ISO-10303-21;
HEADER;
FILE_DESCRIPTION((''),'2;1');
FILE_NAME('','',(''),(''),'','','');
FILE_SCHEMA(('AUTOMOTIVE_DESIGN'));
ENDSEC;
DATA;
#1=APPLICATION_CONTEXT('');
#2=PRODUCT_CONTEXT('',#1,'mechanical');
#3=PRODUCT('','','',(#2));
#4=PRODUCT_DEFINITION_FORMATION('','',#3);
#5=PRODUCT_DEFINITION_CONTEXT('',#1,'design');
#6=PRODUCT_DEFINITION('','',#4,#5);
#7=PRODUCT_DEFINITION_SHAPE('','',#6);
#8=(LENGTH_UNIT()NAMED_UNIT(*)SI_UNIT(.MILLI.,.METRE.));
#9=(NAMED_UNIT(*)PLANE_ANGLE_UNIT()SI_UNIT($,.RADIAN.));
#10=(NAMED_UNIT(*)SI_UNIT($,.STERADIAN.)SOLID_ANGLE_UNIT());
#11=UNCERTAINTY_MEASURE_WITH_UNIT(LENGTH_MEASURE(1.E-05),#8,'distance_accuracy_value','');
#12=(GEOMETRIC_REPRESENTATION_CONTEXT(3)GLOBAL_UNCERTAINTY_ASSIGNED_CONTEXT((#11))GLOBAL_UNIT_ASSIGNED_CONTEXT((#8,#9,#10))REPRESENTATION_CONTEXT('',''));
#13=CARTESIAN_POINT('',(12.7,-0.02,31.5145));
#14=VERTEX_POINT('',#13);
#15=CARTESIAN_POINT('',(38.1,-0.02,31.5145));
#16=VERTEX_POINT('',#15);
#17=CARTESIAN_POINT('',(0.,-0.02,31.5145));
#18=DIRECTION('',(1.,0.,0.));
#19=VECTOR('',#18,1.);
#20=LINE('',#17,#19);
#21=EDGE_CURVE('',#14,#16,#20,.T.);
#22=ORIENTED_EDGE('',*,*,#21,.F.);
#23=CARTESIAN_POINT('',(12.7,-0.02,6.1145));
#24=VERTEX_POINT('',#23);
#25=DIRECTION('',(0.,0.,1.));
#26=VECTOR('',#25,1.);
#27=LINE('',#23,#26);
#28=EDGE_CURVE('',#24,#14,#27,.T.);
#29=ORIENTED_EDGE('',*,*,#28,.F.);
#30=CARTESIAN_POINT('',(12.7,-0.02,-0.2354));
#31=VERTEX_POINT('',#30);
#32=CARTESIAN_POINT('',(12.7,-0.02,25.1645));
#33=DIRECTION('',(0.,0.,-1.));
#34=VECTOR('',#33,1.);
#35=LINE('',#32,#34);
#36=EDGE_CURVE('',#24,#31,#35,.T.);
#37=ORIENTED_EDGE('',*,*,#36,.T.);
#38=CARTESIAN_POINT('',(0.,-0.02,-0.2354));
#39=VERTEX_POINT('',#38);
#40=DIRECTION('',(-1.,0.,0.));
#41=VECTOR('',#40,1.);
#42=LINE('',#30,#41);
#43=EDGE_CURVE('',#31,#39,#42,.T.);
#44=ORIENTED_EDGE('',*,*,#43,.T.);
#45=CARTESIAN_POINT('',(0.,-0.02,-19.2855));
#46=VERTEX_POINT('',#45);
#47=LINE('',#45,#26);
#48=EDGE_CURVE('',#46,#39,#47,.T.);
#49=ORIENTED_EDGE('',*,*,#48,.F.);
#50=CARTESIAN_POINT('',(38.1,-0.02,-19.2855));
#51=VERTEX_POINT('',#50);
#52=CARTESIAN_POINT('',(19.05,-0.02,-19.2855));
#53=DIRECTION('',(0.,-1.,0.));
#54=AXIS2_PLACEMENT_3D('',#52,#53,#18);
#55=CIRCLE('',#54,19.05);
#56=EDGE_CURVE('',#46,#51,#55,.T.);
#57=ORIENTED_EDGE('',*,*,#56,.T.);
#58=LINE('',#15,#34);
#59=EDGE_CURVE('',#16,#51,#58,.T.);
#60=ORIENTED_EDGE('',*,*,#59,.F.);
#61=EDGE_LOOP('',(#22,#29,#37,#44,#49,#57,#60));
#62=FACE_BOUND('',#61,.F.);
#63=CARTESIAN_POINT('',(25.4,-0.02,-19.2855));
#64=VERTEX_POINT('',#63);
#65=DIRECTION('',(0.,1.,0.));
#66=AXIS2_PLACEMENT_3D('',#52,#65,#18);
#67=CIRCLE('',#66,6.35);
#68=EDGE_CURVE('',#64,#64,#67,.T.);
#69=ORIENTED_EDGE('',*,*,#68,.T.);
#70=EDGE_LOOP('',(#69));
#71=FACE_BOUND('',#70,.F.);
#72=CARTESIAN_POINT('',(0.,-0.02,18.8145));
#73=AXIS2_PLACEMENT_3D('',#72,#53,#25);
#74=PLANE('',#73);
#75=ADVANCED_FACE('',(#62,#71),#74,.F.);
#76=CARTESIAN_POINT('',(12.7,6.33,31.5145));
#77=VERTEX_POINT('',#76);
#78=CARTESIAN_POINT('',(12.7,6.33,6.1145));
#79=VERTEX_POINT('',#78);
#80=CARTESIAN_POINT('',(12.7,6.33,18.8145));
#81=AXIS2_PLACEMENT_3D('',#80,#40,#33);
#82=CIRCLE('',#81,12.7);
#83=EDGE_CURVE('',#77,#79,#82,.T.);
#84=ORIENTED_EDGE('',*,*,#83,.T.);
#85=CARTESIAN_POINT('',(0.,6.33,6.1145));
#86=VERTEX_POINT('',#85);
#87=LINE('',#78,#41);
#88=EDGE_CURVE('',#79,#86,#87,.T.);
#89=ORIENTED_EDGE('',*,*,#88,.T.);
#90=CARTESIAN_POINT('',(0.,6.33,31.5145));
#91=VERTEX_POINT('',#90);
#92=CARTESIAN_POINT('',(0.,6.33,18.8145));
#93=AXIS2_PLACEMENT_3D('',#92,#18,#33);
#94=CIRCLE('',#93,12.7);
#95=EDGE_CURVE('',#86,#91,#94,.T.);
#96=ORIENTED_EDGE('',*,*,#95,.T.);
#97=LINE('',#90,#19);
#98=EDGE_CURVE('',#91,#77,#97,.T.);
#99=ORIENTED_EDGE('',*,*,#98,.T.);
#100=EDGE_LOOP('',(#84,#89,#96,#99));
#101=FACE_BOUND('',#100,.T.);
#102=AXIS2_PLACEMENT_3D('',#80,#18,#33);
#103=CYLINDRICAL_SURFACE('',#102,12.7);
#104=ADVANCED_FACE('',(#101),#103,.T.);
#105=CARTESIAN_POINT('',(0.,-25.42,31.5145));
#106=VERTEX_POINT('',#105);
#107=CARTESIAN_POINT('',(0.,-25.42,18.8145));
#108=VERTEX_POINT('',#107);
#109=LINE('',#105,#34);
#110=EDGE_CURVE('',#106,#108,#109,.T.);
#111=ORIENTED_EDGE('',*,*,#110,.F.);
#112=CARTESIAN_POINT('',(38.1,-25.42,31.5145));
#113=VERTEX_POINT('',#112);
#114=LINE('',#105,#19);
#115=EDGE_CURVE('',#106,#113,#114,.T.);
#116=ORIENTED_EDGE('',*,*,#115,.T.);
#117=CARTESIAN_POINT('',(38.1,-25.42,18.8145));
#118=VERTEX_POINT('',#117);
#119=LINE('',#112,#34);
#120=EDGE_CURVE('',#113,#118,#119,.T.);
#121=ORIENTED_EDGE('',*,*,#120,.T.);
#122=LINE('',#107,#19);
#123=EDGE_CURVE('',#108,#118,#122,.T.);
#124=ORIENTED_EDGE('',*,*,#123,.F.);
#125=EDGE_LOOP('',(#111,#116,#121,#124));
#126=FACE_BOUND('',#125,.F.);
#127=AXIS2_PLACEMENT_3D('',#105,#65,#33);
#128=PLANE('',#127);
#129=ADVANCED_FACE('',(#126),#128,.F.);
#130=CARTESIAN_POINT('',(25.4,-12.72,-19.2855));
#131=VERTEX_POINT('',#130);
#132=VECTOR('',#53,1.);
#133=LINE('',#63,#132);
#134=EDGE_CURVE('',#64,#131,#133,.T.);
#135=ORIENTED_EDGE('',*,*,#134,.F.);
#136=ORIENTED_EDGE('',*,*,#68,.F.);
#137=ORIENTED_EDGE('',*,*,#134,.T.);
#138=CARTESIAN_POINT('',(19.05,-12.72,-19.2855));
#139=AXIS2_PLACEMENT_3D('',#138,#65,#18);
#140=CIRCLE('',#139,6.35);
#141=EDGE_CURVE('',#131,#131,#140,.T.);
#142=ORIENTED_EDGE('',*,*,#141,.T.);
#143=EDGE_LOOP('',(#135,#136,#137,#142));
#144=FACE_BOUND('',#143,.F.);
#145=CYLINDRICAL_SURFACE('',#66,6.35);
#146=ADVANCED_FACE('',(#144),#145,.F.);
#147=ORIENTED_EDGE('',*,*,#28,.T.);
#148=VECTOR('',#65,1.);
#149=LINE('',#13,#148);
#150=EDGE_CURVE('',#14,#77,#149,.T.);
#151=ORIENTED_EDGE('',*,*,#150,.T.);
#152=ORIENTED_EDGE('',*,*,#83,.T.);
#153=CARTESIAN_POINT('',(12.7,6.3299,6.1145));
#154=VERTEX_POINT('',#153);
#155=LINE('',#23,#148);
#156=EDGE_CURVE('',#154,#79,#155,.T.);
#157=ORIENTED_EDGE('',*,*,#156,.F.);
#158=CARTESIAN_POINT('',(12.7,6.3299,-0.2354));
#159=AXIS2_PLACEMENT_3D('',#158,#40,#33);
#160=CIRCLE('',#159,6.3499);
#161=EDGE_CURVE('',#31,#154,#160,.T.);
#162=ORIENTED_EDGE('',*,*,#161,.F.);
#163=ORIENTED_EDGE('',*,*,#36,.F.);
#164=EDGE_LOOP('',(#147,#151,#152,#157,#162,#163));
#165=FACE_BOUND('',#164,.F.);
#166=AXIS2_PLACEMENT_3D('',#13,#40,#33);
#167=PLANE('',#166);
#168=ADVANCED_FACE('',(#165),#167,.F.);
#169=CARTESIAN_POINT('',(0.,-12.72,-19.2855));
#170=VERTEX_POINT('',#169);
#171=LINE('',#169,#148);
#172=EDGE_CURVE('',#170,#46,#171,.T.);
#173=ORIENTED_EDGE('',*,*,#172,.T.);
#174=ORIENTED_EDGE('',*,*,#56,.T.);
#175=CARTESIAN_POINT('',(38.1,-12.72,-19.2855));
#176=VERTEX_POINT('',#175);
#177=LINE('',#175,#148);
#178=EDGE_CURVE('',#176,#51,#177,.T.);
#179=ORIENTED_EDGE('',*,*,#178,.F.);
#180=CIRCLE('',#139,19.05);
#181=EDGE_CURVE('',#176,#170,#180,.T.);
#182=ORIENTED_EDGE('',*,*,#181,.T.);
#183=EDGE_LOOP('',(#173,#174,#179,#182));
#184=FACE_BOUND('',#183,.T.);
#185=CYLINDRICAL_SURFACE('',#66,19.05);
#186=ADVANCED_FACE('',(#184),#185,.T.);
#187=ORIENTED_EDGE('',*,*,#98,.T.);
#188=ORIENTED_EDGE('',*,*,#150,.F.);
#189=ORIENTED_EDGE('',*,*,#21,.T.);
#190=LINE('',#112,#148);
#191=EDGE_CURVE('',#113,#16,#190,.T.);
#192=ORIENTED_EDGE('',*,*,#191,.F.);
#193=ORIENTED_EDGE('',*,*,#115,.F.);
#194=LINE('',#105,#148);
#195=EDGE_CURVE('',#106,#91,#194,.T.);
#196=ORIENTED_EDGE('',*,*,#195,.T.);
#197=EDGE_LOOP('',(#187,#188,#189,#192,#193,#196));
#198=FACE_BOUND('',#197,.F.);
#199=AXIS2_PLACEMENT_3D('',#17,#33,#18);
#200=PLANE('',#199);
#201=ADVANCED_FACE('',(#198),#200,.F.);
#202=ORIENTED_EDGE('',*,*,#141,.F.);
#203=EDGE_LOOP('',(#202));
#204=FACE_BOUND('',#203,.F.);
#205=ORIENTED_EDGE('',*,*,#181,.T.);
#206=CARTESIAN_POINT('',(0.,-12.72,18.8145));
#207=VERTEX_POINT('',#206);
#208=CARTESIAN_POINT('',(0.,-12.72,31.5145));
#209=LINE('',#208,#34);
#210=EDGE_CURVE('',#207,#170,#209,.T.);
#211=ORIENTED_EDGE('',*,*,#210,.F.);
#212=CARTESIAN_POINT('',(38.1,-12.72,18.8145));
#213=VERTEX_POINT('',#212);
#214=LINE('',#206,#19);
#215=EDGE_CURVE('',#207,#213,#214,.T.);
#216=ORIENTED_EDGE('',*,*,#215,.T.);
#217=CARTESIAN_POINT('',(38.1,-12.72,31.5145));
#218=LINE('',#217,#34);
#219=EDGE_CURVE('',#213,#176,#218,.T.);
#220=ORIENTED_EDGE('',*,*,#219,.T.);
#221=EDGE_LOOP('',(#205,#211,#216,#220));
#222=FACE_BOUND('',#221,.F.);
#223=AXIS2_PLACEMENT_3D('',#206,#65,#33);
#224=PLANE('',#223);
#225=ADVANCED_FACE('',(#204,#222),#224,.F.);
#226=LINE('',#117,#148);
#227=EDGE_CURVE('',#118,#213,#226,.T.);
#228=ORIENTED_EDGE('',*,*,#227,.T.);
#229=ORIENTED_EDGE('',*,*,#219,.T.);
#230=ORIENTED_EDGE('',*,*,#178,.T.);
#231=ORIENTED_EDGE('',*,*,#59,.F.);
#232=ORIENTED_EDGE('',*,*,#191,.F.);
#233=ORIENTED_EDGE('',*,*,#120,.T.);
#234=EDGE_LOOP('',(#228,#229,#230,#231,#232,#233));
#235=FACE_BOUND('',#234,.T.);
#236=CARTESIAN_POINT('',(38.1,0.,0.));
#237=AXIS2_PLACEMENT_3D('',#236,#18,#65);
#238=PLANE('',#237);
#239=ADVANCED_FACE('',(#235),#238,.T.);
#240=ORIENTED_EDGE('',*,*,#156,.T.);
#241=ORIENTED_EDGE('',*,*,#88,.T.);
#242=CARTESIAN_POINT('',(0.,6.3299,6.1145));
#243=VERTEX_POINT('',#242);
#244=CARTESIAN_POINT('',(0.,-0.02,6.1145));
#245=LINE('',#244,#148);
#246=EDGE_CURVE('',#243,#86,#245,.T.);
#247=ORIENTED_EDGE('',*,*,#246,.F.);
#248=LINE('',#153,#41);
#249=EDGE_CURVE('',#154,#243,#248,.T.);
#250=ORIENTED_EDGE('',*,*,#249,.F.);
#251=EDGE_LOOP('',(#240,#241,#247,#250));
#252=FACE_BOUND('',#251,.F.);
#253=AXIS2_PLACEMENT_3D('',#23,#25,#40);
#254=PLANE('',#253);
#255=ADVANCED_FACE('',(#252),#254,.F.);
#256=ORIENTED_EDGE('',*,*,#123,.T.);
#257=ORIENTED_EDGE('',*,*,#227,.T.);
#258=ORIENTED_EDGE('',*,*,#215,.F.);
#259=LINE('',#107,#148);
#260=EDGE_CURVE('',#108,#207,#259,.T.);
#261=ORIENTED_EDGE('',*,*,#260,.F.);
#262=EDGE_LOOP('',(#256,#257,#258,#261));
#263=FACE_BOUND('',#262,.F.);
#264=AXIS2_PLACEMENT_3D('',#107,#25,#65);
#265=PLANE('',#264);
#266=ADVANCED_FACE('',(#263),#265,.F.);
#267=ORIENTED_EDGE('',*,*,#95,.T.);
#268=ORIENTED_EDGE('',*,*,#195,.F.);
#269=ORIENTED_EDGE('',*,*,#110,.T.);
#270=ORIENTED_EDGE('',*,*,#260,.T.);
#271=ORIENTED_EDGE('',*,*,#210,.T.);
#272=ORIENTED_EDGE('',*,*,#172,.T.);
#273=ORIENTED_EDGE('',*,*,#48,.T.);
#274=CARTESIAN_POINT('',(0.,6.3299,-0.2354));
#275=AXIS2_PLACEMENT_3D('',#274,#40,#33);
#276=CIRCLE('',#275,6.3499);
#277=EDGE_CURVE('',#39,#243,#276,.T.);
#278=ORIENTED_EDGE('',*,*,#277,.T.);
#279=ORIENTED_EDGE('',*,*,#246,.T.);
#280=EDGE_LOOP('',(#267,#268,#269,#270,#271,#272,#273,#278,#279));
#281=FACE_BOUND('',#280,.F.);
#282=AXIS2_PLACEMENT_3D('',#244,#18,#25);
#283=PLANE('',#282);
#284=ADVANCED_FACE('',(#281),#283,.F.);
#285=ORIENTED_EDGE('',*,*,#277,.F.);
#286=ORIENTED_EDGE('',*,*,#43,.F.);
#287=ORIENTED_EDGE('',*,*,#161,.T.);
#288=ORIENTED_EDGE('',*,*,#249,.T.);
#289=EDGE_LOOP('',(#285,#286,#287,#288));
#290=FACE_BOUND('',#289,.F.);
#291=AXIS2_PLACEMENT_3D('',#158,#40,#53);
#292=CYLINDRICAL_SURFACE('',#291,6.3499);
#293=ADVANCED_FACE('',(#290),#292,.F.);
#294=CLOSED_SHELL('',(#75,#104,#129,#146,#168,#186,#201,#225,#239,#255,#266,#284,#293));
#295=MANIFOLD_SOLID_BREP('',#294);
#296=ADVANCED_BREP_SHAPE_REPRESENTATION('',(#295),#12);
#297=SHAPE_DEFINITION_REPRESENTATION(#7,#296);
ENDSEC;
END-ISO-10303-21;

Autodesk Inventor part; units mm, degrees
ref_plane "YZ Plane" through (0, 0, 0) normal (1, 0, 0) x (0, 1, 0)
ref_plane "XZ Plane" through (0, 0, 0) normal (0, 1, 0) x (-1, 0, 0)
ref_plane "XY Plane" through (0, 0, 0) normal (0, 0, 1) x (1, 0, 0)
sketch "Sketch1" plane through (0, 0, 0) normal (1, 0, 0) x (0, 1, 0)
  line L0 (-0.02, 31.5145) -> (-25.42, 31.5145)
  line L1 (-25.42, 31.5145) -> (-25.42, 18.8145)
  line L2 (-25.42, 18.8145) -> (-0.02, 18.8145)
  line L3 (-0.02, 18.8145) -> (-0.02, 31.5145)
  line L4 (-0.02, 31.5145) -> (-12.72, 31.5145)
  line L5 (-12.72, 31.5145) -> (-12.72, -19.2855)
  line L6 (-12.72, -19.2855) -> (-0.02, -19.2855)
  line L7 (-0.02, -19.2855) -> (-0.02, 31.5145)
  point P0 (0, 0)
  dimension "d0" = 25.4
  dimension "d1" = 12.7
  dimension "d2" = 12.7
  dimension "d3" = 50.8
extrude "Extrusion1" add sketch "Sketch1" along normal blind 38.1
sketch "Sketch2" plane through (0, -0.02, 31.5145) normal (0, 1, 0) x (1, 0, 0)
  line L0 (0, 50.8) -> (38.1, 50.8) projected
  line L1 (38.1, 50.8) -> (19.05, 50.8)
  circle A0 centre (19.05, 50.8) radius 19.05
  line L2 (0, 50.8) -> (0, 0) projected
  line L3 (0, 50.8) -> (38.1, 50.8)
  line L4 (0, 50.8) -> (38.1, 50.8)
  point P0 (0, 31.5145)
  dimension "d7" = 38.1
extrude "Extrusion2" add sketch "Sketch2" against normal blind 12.7
sketch "Sketch3" plane through (0, -0.02, 31.5145) normal (0, 1, 0) x (1, 0, 0)
  line L0 (38.1, 12.7) -> (38.1, 50.8) projected
  line L1 (38.1, 50.8) -> (19.05, 50.8)
  circle A0 centre (19.05, 50.8) radius 6.35
  point P0 (0, 31.5145)
  dimension "d10" = 19.05
  dimension "d11" = 12.7
extrude "Extrusion3" cut sketch "Sketch3" against normal blind 12.7
sketch "Sketch4" plane through (0, -0.02, 31.5145) normal (0, 1, 0) x (1, 0, 0)
  line L0 (0, 0) -> (38.1, 0) projected
  line L1 (0, 0) -> (12.7, 0)
  line L2 (12.7, 0) -> (12.7, 25.4)
  line L3 (12.7, 25.4) -> (0, 25.4)
  line L4 (0, 25.4) -> (0, 0)
  point P0 (0, 31.5145)
  dimension "d14" = 12.7
  dimension "d15" = 25.4
extrude "Extrusion4" add sketch "Sketch4" along normal blind 6.35
sketch "Sketch5" plane through (12.7, -0.02, 31.5145) normal (1, 0, 0) x (0, 0, -1)
  line L0 (0, 0) -> (0, 6.35) projected
  line L1 (0, 6.35) -> (25.4, 6.35) projected
  circle A0 centre (12.7, 6.35) radius 12.7
  point P0 (31.5145, 0.02)
  dimension "d19" = 25.4
extrude "Extrusion5" add sketch "Sketch5" against normal blind 12.7
fillet "Fillet1" radius 6.35 1 edges at (6.35, -0.02, 6.1145)
